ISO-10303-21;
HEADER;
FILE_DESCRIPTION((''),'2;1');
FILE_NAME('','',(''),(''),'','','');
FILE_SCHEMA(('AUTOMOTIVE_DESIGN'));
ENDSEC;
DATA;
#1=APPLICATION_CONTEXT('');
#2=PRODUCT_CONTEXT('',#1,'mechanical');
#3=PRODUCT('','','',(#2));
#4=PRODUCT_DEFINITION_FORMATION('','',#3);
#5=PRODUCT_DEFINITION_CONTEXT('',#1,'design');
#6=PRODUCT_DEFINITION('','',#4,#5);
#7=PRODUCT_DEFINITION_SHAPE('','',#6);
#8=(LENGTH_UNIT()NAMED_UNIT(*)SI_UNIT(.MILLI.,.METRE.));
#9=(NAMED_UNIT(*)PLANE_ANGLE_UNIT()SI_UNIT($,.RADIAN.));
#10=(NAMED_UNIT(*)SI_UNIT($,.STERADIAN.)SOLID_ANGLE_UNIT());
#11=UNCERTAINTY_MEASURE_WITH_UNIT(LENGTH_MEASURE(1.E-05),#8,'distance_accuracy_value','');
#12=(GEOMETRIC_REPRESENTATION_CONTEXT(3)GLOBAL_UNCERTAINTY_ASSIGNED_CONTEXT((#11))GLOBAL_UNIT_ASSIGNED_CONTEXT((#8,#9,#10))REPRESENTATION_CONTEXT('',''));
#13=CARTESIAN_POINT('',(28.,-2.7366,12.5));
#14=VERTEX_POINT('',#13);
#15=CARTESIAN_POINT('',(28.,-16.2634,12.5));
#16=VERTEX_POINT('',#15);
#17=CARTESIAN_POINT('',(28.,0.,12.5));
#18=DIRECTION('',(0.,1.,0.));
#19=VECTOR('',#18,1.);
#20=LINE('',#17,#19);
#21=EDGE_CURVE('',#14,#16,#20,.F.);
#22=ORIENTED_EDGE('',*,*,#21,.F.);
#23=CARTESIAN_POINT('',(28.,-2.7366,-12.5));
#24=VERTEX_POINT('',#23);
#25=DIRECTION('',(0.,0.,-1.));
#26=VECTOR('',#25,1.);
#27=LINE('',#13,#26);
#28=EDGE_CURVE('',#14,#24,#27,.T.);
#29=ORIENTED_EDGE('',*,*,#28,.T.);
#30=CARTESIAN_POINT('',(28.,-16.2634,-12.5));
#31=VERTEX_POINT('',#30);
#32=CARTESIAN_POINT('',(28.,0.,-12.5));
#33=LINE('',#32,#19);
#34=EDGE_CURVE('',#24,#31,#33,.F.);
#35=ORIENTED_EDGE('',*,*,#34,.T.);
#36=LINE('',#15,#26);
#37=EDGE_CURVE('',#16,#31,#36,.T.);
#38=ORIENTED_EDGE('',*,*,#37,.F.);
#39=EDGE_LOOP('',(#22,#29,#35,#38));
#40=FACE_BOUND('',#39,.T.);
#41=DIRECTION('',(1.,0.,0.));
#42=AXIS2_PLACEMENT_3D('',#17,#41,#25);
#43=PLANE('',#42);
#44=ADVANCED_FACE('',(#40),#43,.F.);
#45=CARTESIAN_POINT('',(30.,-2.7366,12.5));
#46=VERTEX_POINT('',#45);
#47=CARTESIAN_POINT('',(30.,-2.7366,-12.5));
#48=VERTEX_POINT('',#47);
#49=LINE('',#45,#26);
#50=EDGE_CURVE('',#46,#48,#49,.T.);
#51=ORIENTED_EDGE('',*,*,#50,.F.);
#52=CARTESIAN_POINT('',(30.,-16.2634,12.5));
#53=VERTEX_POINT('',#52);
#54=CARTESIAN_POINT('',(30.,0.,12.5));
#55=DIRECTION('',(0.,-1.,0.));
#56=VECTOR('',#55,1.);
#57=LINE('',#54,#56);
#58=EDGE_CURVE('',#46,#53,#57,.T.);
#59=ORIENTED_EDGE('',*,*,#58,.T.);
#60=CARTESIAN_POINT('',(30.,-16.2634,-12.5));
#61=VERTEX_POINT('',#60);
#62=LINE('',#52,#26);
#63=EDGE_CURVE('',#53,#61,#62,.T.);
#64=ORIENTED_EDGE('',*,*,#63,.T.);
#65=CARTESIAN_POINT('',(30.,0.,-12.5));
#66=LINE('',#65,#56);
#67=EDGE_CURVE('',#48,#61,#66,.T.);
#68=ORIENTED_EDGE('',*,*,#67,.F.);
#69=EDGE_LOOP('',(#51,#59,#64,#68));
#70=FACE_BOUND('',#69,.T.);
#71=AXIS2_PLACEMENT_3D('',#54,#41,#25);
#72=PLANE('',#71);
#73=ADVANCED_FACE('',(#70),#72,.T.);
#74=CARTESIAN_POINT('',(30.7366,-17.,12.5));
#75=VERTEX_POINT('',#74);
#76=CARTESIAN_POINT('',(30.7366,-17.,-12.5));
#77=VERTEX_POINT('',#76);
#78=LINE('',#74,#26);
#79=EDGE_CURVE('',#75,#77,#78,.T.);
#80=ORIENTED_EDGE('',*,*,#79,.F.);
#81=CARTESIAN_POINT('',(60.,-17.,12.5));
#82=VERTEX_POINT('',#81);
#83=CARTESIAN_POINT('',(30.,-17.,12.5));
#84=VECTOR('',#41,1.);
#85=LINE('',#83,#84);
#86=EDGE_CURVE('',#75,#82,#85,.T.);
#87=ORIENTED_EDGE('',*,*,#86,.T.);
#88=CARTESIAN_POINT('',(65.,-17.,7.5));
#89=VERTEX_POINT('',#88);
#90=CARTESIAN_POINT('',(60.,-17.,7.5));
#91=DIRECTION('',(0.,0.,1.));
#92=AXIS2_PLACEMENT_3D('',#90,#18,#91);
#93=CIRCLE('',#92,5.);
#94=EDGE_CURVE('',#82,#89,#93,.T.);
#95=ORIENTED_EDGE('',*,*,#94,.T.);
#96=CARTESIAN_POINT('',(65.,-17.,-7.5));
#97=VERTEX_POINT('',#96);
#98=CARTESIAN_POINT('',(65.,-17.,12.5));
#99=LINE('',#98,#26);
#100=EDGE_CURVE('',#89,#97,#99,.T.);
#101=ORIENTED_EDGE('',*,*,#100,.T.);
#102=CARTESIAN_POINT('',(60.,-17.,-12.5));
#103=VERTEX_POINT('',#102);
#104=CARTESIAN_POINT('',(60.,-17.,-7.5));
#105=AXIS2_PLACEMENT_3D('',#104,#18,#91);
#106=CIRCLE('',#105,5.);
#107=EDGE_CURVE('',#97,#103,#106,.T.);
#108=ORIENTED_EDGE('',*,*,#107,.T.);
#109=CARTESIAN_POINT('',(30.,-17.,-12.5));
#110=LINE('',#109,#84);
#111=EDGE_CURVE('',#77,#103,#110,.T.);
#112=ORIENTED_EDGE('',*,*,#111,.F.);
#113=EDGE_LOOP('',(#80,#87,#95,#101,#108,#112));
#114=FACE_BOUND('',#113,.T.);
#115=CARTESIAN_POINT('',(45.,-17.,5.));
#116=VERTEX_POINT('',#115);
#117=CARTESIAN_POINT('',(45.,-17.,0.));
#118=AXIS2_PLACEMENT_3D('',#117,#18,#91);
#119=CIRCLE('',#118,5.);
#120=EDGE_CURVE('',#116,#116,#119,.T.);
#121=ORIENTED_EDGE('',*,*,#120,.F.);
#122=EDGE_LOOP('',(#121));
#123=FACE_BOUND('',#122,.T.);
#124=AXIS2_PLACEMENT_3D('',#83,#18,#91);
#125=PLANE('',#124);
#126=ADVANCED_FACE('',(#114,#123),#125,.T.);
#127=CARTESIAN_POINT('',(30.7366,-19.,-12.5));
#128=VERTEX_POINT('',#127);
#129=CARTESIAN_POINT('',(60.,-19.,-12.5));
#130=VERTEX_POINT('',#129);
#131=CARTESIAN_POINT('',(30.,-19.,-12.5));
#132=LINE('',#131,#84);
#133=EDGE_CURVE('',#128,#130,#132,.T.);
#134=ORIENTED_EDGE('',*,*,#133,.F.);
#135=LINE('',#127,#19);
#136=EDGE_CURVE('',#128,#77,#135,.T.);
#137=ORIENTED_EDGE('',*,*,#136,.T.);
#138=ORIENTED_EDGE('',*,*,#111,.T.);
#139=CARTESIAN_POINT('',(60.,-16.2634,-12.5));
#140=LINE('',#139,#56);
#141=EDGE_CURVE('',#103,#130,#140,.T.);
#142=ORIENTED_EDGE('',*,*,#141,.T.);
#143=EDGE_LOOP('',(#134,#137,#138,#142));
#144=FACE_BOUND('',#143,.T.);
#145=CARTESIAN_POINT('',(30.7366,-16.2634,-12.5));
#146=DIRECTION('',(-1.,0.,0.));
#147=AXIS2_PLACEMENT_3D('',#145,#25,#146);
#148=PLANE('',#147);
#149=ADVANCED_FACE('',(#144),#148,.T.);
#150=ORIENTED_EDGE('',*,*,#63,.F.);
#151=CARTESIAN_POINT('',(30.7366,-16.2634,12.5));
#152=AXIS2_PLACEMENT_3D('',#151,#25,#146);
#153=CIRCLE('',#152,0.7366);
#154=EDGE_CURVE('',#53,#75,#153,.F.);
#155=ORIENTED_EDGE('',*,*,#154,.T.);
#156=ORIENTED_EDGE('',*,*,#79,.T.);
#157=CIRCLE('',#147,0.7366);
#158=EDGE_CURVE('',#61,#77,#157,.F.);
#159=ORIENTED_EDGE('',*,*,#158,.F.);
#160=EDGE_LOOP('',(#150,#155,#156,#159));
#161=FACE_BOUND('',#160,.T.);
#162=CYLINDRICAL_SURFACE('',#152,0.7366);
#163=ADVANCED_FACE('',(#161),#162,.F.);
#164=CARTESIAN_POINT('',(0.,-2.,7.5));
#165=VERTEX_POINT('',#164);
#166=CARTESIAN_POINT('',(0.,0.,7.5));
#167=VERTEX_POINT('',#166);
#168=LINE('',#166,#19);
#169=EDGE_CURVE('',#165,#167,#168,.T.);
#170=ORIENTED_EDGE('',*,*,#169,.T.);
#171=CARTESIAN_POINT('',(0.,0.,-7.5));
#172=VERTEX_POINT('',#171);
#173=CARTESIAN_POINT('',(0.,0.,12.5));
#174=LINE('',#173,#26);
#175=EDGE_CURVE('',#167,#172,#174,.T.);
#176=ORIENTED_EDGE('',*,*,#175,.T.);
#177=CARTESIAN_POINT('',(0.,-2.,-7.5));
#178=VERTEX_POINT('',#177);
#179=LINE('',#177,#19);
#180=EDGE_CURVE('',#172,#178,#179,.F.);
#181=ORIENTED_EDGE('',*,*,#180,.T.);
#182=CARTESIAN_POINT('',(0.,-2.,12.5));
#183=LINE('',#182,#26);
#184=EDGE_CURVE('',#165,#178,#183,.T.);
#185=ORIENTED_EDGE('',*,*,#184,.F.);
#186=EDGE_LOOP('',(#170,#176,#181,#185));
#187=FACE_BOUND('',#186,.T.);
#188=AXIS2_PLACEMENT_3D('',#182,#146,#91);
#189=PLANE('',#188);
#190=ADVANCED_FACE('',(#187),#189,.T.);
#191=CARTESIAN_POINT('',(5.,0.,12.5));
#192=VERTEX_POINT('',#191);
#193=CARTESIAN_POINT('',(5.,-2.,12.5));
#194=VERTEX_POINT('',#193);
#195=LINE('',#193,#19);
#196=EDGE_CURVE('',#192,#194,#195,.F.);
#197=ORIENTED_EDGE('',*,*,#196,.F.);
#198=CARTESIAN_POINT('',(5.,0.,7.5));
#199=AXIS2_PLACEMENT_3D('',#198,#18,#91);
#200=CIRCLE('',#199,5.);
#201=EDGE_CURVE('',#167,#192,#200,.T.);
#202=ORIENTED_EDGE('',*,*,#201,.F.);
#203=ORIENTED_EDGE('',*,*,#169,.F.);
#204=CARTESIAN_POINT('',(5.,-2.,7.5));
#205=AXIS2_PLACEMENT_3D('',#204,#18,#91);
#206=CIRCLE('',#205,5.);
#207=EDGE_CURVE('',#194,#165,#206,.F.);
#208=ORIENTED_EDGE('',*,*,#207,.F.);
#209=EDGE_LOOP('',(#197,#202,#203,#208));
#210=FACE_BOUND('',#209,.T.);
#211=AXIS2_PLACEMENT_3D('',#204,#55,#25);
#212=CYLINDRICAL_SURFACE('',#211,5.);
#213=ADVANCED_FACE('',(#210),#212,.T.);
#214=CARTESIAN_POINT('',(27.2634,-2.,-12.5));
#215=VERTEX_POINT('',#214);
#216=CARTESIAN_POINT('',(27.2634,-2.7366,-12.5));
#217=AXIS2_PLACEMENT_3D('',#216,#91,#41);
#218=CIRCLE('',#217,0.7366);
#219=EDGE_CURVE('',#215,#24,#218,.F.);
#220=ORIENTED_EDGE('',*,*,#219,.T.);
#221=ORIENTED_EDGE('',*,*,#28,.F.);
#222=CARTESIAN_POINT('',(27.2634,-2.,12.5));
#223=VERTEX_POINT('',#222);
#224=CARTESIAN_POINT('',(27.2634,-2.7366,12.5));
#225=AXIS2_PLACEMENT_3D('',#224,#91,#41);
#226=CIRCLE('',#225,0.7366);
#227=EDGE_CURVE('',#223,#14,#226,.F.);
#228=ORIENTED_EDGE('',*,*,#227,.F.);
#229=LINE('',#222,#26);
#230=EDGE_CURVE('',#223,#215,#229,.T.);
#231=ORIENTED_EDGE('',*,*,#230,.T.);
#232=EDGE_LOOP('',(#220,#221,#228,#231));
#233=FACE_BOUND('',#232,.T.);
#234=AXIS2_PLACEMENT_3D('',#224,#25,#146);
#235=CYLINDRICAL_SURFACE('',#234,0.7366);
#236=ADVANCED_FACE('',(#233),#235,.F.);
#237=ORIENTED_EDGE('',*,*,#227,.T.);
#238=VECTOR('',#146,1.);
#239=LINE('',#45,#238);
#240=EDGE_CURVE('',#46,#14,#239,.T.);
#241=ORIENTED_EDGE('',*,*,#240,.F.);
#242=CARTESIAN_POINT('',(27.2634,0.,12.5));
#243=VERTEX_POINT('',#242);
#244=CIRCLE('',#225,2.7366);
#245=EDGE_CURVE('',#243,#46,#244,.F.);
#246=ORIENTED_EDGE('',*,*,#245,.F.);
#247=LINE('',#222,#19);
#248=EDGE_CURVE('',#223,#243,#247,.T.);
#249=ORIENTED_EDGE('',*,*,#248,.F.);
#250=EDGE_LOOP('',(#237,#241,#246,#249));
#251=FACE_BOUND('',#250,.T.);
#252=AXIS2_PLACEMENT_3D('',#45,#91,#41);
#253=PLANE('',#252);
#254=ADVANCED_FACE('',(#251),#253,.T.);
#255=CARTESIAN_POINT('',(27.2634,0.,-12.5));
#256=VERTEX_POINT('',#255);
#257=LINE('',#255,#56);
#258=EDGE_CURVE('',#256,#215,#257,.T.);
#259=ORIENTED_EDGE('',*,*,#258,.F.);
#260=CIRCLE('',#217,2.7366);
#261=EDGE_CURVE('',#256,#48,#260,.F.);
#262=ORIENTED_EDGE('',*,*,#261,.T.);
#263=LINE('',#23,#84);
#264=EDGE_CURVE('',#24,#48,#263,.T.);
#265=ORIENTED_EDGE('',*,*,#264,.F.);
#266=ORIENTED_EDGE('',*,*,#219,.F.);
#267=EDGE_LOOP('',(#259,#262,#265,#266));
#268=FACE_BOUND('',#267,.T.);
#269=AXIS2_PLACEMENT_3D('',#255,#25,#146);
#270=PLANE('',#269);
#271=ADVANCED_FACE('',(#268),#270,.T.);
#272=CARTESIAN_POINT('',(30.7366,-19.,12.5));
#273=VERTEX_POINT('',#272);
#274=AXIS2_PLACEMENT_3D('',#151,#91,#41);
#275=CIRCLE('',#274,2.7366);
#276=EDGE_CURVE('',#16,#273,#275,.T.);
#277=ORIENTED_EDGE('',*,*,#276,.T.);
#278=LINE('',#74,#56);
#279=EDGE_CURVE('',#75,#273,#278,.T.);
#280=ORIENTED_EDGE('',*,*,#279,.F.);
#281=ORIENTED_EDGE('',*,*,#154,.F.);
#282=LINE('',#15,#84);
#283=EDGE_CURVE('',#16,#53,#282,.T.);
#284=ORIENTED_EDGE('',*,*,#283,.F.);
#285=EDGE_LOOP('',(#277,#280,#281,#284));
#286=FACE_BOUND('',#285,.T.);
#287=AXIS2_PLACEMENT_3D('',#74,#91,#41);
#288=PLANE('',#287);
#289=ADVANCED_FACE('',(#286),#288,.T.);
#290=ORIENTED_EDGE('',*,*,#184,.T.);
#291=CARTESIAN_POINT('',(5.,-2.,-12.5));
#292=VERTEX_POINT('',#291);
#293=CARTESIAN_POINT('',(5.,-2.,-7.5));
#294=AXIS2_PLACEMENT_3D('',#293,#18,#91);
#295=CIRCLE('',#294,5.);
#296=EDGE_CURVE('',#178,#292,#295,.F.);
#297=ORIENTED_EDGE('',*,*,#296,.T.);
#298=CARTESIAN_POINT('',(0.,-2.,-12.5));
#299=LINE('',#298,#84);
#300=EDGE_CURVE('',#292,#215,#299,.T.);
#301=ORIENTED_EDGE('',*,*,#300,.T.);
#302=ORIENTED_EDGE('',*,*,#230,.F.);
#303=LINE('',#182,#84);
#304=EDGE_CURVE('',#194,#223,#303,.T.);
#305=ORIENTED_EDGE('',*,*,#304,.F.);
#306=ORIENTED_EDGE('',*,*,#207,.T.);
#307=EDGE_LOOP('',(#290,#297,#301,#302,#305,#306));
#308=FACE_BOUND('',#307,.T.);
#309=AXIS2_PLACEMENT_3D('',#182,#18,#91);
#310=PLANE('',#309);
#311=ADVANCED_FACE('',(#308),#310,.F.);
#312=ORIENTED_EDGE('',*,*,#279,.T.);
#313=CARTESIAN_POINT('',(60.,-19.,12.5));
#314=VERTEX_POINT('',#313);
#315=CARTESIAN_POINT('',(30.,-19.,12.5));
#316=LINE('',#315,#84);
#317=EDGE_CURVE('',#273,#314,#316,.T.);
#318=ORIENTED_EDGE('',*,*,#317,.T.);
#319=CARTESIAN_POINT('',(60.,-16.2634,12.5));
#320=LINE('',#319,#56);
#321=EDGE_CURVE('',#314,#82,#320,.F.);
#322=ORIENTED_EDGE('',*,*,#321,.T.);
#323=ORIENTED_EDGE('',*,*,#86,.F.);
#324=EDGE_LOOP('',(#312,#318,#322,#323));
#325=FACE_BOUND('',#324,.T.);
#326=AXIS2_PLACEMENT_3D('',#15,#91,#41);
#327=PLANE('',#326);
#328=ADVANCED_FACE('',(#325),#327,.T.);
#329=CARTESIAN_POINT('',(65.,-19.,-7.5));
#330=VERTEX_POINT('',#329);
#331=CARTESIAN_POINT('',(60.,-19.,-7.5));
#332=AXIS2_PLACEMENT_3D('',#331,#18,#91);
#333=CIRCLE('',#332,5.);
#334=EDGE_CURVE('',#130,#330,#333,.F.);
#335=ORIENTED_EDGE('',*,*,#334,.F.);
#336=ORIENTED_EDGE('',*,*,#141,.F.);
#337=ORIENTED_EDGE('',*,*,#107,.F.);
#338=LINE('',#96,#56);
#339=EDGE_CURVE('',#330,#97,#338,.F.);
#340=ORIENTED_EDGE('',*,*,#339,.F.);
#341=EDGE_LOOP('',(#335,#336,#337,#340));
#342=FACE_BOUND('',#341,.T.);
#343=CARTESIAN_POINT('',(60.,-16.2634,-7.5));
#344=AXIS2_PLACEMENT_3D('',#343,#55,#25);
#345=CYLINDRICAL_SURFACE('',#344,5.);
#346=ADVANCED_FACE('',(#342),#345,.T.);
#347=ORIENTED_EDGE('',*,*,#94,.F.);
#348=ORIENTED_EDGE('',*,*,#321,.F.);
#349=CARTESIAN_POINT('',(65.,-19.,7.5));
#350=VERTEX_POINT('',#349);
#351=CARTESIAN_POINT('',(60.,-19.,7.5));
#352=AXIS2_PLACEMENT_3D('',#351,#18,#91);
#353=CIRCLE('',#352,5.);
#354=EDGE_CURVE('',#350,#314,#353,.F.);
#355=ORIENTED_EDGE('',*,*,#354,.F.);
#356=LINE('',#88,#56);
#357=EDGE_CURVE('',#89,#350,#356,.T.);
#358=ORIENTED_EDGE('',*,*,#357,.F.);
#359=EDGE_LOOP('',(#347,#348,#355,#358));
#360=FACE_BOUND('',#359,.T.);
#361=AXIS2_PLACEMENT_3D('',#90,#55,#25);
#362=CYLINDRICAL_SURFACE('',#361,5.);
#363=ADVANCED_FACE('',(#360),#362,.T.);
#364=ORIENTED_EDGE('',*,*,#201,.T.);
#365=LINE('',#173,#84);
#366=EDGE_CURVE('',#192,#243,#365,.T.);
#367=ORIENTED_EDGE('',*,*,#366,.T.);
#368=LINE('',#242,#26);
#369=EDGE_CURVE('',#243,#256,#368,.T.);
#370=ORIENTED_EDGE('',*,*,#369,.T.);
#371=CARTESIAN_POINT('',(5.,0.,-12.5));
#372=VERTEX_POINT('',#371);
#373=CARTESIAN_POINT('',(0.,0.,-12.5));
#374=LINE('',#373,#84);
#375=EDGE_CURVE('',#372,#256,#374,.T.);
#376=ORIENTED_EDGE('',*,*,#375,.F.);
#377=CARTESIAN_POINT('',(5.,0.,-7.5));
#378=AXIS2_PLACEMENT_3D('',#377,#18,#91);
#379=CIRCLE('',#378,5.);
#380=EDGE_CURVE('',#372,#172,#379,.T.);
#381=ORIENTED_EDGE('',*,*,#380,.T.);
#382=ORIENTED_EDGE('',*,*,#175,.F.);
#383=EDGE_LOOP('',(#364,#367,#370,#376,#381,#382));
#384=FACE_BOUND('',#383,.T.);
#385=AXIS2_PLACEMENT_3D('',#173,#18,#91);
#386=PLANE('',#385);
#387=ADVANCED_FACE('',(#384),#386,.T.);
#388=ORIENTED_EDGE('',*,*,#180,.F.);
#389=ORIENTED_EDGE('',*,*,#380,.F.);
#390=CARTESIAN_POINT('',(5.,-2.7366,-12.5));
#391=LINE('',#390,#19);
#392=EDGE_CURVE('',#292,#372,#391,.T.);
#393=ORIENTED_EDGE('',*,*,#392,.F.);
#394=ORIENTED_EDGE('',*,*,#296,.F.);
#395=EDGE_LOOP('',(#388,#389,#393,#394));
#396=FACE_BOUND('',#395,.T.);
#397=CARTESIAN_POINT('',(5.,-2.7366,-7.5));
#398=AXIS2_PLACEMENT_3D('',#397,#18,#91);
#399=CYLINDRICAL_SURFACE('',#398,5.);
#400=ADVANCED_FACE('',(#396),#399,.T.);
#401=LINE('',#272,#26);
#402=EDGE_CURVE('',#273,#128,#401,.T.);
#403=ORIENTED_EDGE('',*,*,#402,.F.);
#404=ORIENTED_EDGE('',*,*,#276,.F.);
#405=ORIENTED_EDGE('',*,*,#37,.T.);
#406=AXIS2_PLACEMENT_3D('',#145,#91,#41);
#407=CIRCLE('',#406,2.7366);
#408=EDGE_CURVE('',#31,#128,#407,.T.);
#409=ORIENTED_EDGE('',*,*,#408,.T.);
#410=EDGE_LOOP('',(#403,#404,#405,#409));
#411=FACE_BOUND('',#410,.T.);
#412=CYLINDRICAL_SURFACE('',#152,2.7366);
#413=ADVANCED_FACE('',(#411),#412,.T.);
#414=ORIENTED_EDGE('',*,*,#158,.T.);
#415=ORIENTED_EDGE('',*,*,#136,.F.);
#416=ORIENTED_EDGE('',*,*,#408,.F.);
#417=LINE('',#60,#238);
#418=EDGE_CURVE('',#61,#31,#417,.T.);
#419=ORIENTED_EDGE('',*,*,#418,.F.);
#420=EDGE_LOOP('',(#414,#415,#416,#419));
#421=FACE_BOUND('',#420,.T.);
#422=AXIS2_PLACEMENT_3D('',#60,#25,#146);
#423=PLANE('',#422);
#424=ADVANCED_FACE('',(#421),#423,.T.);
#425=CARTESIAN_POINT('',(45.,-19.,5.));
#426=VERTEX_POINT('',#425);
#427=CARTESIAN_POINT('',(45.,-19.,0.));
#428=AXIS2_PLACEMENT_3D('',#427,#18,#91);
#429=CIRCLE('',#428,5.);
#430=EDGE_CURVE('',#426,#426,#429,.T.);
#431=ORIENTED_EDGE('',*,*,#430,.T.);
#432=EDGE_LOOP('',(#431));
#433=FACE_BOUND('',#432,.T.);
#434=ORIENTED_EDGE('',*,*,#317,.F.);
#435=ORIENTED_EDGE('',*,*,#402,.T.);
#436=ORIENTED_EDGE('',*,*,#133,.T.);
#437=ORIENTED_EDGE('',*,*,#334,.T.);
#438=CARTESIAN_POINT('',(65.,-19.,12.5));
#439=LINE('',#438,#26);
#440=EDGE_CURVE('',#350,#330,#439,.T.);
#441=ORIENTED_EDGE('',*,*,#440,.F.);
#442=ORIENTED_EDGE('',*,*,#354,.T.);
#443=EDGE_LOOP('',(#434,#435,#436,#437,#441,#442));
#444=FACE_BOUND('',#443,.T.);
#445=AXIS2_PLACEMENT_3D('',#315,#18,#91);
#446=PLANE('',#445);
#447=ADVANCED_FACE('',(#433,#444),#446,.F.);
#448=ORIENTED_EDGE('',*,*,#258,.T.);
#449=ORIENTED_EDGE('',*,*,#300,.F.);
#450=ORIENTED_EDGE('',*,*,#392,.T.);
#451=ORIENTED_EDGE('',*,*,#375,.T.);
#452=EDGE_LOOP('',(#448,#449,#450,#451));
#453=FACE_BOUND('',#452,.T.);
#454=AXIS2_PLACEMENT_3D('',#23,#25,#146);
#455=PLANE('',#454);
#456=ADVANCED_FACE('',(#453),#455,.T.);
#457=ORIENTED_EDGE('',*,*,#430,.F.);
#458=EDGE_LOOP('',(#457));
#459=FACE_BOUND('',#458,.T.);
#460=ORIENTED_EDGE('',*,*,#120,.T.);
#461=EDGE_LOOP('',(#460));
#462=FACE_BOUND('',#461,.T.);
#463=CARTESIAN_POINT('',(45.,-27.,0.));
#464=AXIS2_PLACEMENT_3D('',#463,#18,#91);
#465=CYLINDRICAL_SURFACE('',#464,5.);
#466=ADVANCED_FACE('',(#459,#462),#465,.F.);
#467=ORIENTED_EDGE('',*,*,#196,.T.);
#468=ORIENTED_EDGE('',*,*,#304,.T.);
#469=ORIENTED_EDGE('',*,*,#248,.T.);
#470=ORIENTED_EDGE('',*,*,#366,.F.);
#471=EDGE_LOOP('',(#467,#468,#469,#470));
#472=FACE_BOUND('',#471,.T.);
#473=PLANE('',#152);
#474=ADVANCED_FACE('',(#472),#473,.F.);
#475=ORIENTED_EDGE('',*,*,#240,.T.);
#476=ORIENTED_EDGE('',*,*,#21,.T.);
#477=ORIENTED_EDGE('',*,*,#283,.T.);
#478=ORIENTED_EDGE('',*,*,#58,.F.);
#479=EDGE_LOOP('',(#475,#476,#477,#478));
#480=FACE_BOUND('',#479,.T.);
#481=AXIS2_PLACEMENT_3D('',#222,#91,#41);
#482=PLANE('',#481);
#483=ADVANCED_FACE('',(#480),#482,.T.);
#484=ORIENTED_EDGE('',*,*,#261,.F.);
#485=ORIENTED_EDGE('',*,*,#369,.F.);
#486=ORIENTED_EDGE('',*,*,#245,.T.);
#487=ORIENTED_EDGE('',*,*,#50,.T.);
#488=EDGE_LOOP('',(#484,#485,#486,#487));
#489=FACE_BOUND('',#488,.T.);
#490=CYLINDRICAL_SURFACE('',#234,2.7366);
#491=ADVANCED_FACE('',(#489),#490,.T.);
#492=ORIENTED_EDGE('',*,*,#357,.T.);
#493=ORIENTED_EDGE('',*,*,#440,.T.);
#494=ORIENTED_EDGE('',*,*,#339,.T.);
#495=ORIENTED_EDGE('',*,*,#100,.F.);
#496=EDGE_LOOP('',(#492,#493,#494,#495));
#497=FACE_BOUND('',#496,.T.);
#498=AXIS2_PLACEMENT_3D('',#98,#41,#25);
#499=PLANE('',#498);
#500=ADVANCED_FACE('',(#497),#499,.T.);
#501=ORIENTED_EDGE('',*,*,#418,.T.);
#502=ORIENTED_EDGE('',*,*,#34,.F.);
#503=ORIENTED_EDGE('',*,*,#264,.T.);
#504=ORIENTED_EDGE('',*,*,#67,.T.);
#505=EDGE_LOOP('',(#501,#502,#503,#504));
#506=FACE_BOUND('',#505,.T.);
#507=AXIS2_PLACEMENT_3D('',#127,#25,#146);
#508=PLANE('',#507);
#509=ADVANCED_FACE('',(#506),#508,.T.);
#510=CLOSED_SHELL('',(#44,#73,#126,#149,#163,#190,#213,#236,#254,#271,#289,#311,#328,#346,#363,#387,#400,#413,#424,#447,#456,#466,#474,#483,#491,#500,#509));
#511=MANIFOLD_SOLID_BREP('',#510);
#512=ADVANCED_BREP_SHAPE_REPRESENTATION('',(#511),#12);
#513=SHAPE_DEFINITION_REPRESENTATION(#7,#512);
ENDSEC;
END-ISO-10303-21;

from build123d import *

# Parameters (mm, degrees)
TABAN_FLAN_1_DEPTH    = 12.5
K_ELERI_START         = -19
K_ELERI_K_R1_DEPTH    = 19
IZIM2_R               = 5
KES_EKSTR_ZYON1_DEPTH = 10


# Read off the part's stored shape, not the designer's step: Köşeleri kır1
# Sheet-metal steps are written as plain solids
with BuildPart() as part:
    # Çizim1 → Taban-Flanş1 (new, symmetric)
    with BuildSketch(Plane.XY):
        with BuildLine():
            Line((0, 0), (27.2634, 0))
            ThreePointArc((27.2634, 0), (29.198468417, -0.801531583), (30, -2.7366))
            Line((30, -2.7366), (30, -16.2634))
            ThreePointArc((30, -16.2634), (30.215745145, -16.784254855), (30.7366, -17))
            Line((30.7366, -17), (65, -17))
            Line((65, -17), (65, -19))
            Line((65, -19), (30.7366, -19))
            ThreePointArc((30.7366, -19), (28.801531583, -18.198468417), (28, -16.2634))
            Line((28, -16.2634), (28, -2.7366))
            ThreePointArc((28, -2.7366), (27.784254855, -2.215745145), (27.2634, -2))
            Line((27.2634, -2), (0, -2))
            Line((0, -2), (0, 0))
        make_face()
    extrude(amount=TABAN_FLAN_1_DEPTH, both=True)

    # Köşeleri kır1 outline → Köşeleri kır1 (cut)
    with BuildSketch(Plane(origin=(0, 0, 0), x_dir=(1, 0, 0), z_dir=(0, 1, 0)).offset(K_ELERI_START)):
        with BuildLine():
            Line((0, -12.5), (5, -12.5))
            ThreePointArc((5, -12.5), (1.464466094, -11.035533906), (0, -7.5))
            Line((0, -7.5), (0, -12.5))
        make_face()
        with BuildLine():
            Line((0, 12.5), (0, 7.5))
            ThreePointArc((0, 7.5), (1.464466094, 11.035533906), (5, 12.5))
            Line((5, 12.5), (0, 12.5))
        make_face()
        with BuildLine():
            Line((65, -12.5), (65, -7.5))
            ThreePointArc((65, -7.5), (63.535533906, -11.035533906), (60, -12.5))
            Line((60, -12.5), (65, -12.5))
        make_face()
        with BuildLine():
            ThreePointArc((60, 12.5), (63.535533906, 11.035533906), (65, 7.5))
            Line((65, 7.5), (65, 12.5))
            Line((65, 12.5), (60, 12.5))
        make_face()
    extrude(amount=K_ELERI_K_R1_DEPTH, mode=Mode.SUBTRACT)

    # Çizim2 → Kes-Ekstrüzyon1 (cut)
    with BuildSketch(Plane(origin=(0, -17, 0), x_dir=(1, 0, 0), z_dir=(0, 1, 0))):
        with Locations(Location((45, 0, 0), (0, 0, 270))):
            Circle(IZIM2_R)
    extrude(amount=-KES_EKSTR_ZYON1_DEPTH, mode=Mode.SUBTRACT)


solid = part.part
